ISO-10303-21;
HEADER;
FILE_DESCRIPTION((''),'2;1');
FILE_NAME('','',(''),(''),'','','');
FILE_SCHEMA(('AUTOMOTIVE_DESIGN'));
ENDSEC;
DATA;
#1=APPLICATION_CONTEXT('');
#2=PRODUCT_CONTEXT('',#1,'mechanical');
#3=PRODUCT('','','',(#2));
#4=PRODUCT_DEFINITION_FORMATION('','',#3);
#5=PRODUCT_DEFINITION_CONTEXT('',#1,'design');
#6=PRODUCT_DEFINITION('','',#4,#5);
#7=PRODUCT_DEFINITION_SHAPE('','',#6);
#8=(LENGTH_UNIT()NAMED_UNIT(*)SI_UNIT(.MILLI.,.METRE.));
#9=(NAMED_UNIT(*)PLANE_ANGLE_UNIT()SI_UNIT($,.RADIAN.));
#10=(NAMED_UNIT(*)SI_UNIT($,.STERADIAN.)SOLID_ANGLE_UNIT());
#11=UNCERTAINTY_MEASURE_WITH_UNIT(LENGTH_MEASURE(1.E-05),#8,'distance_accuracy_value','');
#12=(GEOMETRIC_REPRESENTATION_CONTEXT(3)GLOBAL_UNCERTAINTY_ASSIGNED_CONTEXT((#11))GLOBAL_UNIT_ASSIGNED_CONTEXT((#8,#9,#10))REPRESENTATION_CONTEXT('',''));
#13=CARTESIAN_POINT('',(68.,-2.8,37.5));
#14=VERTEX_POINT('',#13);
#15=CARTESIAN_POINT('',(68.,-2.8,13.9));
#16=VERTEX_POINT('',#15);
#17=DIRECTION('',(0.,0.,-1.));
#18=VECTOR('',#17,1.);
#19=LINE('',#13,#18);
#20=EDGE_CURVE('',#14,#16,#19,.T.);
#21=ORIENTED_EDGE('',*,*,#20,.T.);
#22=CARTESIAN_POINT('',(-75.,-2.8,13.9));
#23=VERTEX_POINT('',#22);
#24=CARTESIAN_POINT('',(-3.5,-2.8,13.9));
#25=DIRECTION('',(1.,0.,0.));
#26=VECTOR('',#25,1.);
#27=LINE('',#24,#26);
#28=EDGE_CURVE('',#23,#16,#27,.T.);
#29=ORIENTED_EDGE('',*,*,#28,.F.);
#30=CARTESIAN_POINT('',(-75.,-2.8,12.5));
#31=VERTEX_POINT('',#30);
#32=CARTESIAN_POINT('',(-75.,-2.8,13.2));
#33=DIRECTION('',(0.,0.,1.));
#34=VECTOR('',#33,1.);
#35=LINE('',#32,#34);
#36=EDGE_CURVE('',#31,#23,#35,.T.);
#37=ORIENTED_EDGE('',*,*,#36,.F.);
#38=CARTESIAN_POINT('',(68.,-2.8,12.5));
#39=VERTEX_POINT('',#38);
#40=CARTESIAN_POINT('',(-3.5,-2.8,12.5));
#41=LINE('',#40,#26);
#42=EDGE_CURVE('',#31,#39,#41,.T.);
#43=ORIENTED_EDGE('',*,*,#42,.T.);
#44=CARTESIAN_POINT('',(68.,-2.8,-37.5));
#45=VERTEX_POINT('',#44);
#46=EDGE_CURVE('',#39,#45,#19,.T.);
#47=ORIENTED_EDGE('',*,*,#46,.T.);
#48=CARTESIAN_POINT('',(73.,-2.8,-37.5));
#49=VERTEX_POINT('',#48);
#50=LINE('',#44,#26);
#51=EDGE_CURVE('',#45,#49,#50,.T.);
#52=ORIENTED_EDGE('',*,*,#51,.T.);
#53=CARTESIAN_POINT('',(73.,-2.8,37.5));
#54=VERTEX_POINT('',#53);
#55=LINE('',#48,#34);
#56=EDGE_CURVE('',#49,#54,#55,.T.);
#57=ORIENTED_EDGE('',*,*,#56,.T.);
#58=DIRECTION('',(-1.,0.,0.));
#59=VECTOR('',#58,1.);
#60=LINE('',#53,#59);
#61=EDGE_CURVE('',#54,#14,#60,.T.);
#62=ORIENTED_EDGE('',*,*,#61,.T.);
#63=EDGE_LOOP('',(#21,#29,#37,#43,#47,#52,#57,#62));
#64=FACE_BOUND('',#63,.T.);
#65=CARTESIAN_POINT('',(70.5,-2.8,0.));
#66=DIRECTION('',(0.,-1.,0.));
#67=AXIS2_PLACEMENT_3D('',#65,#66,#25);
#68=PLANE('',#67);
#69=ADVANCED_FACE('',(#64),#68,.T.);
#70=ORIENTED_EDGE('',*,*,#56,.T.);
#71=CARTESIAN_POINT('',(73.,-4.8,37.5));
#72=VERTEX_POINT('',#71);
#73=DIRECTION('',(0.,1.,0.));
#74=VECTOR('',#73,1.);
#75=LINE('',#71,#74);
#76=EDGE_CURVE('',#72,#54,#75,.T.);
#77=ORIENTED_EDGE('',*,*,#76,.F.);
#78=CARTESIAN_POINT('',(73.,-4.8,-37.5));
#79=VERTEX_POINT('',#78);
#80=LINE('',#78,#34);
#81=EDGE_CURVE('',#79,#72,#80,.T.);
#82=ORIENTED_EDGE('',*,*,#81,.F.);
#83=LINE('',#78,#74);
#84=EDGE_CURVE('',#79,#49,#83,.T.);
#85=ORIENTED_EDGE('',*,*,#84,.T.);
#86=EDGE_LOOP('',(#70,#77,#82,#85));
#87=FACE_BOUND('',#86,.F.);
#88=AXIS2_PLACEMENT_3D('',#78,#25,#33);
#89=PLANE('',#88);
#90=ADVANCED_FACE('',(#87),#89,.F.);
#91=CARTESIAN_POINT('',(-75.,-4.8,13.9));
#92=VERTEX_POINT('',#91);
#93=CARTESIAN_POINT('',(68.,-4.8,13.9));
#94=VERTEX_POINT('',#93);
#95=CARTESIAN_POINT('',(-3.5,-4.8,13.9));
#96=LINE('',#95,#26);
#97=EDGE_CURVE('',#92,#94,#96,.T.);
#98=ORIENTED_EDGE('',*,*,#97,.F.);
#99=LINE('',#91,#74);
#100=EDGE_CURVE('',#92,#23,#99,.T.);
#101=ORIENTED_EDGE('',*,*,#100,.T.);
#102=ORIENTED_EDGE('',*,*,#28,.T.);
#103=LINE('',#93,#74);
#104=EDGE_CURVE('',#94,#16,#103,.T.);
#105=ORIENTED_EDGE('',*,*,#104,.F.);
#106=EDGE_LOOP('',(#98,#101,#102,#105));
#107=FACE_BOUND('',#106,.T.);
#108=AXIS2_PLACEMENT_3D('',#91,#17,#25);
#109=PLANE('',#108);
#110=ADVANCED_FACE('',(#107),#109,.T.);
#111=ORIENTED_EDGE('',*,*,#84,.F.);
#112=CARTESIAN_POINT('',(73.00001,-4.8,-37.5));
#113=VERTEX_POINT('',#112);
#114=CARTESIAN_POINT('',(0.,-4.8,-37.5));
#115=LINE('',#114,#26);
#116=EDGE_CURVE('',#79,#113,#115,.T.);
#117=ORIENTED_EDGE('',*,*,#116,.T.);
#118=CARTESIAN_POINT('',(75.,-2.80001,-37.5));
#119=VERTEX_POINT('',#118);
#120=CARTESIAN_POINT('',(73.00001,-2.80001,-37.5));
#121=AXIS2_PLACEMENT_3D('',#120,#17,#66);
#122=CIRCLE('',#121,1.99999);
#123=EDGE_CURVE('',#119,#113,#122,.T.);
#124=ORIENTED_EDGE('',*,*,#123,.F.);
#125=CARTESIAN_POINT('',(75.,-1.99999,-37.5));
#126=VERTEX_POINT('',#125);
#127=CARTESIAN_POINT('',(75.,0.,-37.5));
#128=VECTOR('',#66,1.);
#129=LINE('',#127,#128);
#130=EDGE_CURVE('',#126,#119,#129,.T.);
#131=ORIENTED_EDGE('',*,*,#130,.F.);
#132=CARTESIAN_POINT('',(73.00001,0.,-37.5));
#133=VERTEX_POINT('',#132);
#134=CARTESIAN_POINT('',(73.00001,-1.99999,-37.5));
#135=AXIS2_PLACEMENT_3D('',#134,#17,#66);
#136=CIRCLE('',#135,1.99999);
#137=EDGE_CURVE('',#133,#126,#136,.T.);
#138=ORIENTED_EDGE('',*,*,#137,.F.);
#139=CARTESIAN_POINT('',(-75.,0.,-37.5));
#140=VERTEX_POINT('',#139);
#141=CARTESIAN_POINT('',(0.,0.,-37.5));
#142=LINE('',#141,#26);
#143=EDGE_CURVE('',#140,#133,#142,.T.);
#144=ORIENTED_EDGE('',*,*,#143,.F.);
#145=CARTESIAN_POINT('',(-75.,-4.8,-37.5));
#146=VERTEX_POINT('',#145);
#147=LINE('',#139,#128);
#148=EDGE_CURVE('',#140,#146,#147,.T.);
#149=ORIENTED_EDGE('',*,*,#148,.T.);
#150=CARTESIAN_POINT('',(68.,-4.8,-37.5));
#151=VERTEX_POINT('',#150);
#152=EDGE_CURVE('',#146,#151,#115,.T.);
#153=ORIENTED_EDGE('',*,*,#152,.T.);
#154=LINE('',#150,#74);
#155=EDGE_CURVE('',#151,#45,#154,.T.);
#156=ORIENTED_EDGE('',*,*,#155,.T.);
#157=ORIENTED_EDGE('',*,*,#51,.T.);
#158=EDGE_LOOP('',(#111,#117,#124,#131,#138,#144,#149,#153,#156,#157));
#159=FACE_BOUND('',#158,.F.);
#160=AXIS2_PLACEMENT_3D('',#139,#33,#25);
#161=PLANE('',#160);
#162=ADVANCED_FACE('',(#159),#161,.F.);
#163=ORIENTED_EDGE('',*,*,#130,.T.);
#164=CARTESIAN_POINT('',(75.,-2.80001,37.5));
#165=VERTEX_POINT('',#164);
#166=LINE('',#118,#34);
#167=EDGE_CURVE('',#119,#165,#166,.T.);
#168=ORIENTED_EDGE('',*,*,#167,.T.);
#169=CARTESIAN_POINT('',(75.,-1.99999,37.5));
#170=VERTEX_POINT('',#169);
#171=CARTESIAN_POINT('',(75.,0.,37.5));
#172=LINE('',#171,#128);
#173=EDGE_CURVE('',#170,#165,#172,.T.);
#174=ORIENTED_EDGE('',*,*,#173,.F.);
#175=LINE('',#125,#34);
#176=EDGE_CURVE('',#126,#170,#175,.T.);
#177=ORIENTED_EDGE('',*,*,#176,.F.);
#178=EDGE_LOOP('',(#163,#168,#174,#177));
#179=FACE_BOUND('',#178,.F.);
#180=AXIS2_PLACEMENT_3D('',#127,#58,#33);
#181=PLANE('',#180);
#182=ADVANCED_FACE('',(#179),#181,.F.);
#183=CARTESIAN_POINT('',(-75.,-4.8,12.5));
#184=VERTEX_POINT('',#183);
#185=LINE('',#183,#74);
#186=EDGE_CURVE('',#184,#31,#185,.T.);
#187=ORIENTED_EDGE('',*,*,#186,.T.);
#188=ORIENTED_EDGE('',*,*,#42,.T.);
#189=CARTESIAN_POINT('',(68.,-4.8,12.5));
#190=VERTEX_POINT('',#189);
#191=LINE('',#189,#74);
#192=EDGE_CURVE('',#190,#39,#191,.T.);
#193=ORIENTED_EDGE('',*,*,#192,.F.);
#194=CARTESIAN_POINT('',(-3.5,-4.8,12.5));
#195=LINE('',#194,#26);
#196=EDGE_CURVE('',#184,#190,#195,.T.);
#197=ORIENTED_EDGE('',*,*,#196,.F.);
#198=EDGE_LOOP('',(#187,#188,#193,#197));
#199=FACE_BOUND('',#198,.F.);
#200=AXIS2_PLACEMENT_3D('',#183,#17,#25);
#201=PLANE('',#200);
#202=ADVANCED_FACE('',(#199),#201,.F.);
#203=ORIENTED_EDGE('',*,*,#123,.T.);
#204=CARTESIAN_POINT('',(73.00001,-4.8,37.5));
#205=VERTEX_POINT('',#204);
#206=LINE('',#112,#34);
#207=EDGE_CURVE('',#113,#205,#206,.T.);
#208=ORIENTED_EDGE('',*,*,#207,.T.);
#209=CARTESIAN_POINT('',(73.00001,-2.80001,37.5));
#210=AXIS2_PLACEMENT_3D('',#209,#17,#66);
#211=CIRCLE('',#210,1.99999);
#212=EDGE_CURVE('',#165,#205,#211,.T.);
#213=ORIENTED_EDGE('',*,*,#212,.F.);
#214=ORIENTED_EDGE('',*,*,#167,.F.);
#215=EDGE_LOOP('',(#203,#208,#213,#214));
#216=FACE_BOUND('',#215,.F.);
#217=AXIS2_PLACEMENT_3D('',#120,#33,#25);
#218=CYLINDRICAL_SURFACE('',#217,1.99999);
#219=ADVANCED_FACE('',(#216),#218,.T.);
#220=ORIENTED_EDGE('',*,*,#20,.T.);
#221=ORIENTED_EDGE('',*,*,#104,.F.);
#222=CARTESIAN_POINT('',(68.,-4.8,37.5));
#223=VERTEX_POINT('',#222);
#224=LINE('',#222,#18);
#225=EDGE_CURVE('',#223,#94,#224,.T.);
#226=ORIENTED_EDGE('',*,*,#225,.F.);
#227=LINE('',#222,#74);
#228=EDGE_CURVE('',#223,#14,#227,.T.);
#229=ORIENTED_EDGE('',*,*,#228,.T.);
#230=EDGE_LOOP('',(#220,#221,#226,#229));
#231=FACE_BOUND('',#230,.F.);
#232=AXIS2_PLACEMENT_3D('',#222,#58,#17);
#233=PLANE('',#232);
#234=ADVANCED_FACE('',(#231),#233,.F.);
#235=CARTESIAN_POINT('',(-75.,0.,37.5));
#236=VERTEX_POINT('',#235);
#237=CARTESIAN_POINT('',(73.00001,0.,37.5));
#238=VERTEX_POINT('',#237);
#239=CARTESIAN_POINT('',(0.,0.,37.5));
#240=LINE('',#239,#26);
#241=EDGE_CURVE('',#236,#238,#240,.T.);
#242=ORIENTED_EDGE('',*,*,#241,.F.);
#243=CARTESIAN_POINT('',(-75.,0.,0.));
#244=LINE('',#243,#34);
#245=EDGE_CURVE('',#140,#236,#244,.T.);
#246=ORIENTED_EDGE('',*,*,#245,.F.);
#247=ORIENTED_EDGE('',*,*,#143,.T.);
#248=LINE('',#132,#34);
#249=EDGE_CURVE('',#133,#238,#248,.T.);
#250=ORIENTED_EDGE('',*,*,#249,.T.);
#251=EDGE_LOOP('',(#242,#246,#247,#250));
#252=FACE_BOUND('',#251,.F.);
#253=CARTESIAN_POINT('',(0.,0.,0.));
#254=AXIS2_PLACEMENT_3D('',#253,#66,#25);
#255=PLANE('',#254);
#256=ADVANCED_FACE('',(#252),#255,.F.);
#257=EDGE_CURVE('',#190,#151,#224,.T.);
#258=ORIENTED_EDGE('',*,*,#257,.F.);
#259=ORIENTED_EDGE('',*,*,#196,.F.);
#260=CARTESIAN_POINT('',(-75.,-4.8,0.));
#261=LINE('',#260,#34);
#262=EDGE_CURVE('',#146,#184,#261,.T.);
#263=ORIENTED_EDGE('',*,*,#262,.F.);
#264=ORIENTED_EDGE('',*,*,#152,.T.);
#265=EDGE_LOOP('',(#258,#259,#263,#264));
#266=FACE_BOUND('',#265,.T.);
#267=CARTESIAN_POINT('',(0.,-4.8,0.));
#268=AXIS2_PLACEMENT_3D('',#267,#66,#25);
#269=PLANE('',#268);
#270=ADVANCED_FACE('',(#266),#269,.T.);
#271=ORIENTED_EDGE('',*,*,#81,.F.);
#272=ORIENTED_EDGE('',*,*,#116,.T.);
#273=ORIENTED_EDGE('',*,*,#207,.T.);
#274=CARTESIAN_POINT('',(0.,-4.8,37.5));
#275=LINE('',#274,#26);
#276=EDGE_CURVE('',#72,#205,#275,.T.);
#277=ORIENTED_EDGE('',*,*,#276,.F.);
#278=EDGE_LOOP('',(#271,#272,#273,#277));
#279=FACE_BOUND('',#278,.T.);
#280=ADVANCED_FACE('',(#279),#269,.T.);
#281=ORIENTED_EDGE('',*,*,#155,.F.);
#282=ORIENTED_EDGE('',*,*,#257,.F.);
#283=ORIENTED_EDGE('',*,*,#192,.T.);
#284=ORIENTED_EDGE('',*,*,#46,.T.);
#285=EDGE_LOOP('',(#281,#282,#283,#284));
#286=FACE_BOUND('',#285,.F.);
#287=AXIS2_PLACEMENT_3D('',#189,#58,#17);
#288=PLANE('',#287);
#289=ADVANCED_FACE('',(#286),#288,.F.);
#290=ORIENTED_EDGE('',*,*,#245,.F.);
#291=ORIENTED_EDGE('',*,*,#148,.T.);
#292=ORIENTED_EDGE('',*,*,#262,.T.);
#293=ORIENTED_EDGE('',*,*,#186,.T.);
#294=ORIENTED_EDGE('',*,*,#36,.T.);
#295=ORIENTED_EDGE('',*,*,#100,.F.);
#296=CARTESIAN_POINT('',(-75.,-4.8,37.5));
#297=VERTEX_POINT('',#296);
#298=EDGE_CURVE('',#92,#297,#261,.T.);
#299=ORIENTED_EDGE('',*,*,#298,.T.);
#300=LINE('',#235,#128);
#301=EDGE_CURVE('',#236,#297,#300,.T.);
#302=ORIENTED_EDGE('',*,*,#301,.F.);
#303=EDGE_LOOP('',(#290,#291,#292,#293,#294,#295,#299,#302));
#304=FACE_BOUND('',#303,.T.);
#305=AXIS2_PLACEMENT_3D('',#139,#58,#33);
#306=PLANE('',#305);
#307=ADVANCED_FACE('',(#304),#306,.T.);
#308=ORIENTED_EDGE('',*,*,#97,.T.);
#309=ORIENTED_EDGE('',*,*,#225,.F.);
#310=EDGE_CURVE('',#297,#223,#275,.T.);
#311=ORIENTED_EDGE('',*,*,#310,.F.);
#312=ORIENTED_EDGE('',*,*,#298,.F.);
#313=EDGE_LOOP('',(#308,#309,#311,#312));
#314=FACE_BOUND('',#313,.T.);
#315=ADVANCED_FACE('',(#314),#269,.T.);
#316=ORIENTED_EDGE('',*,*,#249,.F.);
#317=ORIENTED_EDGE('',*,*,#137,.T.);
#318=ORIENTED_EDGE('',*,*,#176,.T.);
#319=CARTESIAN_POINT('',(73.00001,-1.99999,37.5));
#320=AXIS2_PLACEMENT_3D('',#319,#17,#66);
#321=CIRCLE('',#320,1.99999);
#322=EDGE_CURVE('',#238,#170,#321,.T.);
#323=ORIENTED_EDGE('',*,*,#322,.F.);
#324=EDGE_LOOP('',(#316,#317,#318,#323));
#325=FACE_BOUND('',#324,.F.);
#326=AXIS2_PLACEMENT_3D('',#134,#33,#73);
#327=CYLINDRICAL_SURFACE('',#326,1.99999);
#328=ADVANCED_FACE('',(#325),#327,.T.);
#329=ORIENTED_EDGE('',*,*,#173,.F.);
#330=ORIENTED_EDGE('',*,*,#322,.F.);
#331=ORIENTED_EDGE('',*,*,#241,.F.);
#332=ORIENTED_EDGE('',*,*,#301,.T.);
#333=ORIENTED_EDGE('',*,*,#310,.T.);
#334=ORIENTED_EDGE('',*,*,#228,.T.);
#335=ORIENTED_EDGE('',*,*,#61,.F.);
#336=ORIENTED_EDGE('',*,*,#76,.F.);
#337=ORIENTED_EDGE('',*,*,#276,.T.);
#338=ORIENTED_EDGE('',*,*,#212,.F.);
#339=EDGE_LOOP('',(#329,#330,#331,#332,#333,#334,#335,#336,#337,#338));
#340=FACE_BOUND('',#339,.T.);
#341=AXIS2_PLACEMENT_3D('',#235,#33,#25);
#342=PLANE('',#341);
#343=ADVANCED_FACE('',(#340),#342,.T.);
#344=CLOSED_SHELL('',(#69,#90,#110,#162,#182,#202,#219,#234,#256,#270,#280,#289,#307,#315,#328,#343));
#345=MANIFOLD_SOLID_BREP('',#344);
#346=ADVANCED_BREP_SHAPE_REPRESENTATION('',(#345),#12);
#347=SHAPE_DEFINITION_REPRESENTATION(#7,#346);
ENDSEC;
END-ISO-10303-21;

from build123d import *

# Parameters (mm, degrees)
F0_W     = 150
F0_H     = 75
F1_DEPTH = 4.8
F2_W     = 143
F2_H     = 1.4
F3_DEPTH = 2
F4_R     = 1.99999


# Not quite as in the source:
# - a fillet or chamfer is up to 0.001 mm smaller than in the source, because OpenCascade refuses the exact size


with BuildPart() as f1:
    # F0 (on Front) → F1 (new body)
    with BuildSketch(Plane.XZ):
        Rectangle(F0_W, F0_H)
    extrude(amount=F1_DEPTH)

    # F2 (on face) → F3 (cut)
    with BuildSketch(Plane.XZ.offset(4.8)):
        Polygon((68, 12.5), (68, -37.5), (73, -37.5), (73, 37.5), (68, 37.5), (68, 13.9), align=None)
        with Locations((-3.5, 13.2)):
            Rectangle(F2_W, F2_H)
    extrude(amount=-F3_DEPTH, mode=Mode.SUBTRACT)

    # F4 (radius 2 in the source; OpenCascade refuses exactly that, so slightly less here)
    f4_edges = [f1.edges().sort_by_distance(p)[0] for p in [
        (75, 0, 0),
        (75, -4.8, 0),
    ]]
    fillet(f4_edges, radius=F4_R)


solid = f1.part
